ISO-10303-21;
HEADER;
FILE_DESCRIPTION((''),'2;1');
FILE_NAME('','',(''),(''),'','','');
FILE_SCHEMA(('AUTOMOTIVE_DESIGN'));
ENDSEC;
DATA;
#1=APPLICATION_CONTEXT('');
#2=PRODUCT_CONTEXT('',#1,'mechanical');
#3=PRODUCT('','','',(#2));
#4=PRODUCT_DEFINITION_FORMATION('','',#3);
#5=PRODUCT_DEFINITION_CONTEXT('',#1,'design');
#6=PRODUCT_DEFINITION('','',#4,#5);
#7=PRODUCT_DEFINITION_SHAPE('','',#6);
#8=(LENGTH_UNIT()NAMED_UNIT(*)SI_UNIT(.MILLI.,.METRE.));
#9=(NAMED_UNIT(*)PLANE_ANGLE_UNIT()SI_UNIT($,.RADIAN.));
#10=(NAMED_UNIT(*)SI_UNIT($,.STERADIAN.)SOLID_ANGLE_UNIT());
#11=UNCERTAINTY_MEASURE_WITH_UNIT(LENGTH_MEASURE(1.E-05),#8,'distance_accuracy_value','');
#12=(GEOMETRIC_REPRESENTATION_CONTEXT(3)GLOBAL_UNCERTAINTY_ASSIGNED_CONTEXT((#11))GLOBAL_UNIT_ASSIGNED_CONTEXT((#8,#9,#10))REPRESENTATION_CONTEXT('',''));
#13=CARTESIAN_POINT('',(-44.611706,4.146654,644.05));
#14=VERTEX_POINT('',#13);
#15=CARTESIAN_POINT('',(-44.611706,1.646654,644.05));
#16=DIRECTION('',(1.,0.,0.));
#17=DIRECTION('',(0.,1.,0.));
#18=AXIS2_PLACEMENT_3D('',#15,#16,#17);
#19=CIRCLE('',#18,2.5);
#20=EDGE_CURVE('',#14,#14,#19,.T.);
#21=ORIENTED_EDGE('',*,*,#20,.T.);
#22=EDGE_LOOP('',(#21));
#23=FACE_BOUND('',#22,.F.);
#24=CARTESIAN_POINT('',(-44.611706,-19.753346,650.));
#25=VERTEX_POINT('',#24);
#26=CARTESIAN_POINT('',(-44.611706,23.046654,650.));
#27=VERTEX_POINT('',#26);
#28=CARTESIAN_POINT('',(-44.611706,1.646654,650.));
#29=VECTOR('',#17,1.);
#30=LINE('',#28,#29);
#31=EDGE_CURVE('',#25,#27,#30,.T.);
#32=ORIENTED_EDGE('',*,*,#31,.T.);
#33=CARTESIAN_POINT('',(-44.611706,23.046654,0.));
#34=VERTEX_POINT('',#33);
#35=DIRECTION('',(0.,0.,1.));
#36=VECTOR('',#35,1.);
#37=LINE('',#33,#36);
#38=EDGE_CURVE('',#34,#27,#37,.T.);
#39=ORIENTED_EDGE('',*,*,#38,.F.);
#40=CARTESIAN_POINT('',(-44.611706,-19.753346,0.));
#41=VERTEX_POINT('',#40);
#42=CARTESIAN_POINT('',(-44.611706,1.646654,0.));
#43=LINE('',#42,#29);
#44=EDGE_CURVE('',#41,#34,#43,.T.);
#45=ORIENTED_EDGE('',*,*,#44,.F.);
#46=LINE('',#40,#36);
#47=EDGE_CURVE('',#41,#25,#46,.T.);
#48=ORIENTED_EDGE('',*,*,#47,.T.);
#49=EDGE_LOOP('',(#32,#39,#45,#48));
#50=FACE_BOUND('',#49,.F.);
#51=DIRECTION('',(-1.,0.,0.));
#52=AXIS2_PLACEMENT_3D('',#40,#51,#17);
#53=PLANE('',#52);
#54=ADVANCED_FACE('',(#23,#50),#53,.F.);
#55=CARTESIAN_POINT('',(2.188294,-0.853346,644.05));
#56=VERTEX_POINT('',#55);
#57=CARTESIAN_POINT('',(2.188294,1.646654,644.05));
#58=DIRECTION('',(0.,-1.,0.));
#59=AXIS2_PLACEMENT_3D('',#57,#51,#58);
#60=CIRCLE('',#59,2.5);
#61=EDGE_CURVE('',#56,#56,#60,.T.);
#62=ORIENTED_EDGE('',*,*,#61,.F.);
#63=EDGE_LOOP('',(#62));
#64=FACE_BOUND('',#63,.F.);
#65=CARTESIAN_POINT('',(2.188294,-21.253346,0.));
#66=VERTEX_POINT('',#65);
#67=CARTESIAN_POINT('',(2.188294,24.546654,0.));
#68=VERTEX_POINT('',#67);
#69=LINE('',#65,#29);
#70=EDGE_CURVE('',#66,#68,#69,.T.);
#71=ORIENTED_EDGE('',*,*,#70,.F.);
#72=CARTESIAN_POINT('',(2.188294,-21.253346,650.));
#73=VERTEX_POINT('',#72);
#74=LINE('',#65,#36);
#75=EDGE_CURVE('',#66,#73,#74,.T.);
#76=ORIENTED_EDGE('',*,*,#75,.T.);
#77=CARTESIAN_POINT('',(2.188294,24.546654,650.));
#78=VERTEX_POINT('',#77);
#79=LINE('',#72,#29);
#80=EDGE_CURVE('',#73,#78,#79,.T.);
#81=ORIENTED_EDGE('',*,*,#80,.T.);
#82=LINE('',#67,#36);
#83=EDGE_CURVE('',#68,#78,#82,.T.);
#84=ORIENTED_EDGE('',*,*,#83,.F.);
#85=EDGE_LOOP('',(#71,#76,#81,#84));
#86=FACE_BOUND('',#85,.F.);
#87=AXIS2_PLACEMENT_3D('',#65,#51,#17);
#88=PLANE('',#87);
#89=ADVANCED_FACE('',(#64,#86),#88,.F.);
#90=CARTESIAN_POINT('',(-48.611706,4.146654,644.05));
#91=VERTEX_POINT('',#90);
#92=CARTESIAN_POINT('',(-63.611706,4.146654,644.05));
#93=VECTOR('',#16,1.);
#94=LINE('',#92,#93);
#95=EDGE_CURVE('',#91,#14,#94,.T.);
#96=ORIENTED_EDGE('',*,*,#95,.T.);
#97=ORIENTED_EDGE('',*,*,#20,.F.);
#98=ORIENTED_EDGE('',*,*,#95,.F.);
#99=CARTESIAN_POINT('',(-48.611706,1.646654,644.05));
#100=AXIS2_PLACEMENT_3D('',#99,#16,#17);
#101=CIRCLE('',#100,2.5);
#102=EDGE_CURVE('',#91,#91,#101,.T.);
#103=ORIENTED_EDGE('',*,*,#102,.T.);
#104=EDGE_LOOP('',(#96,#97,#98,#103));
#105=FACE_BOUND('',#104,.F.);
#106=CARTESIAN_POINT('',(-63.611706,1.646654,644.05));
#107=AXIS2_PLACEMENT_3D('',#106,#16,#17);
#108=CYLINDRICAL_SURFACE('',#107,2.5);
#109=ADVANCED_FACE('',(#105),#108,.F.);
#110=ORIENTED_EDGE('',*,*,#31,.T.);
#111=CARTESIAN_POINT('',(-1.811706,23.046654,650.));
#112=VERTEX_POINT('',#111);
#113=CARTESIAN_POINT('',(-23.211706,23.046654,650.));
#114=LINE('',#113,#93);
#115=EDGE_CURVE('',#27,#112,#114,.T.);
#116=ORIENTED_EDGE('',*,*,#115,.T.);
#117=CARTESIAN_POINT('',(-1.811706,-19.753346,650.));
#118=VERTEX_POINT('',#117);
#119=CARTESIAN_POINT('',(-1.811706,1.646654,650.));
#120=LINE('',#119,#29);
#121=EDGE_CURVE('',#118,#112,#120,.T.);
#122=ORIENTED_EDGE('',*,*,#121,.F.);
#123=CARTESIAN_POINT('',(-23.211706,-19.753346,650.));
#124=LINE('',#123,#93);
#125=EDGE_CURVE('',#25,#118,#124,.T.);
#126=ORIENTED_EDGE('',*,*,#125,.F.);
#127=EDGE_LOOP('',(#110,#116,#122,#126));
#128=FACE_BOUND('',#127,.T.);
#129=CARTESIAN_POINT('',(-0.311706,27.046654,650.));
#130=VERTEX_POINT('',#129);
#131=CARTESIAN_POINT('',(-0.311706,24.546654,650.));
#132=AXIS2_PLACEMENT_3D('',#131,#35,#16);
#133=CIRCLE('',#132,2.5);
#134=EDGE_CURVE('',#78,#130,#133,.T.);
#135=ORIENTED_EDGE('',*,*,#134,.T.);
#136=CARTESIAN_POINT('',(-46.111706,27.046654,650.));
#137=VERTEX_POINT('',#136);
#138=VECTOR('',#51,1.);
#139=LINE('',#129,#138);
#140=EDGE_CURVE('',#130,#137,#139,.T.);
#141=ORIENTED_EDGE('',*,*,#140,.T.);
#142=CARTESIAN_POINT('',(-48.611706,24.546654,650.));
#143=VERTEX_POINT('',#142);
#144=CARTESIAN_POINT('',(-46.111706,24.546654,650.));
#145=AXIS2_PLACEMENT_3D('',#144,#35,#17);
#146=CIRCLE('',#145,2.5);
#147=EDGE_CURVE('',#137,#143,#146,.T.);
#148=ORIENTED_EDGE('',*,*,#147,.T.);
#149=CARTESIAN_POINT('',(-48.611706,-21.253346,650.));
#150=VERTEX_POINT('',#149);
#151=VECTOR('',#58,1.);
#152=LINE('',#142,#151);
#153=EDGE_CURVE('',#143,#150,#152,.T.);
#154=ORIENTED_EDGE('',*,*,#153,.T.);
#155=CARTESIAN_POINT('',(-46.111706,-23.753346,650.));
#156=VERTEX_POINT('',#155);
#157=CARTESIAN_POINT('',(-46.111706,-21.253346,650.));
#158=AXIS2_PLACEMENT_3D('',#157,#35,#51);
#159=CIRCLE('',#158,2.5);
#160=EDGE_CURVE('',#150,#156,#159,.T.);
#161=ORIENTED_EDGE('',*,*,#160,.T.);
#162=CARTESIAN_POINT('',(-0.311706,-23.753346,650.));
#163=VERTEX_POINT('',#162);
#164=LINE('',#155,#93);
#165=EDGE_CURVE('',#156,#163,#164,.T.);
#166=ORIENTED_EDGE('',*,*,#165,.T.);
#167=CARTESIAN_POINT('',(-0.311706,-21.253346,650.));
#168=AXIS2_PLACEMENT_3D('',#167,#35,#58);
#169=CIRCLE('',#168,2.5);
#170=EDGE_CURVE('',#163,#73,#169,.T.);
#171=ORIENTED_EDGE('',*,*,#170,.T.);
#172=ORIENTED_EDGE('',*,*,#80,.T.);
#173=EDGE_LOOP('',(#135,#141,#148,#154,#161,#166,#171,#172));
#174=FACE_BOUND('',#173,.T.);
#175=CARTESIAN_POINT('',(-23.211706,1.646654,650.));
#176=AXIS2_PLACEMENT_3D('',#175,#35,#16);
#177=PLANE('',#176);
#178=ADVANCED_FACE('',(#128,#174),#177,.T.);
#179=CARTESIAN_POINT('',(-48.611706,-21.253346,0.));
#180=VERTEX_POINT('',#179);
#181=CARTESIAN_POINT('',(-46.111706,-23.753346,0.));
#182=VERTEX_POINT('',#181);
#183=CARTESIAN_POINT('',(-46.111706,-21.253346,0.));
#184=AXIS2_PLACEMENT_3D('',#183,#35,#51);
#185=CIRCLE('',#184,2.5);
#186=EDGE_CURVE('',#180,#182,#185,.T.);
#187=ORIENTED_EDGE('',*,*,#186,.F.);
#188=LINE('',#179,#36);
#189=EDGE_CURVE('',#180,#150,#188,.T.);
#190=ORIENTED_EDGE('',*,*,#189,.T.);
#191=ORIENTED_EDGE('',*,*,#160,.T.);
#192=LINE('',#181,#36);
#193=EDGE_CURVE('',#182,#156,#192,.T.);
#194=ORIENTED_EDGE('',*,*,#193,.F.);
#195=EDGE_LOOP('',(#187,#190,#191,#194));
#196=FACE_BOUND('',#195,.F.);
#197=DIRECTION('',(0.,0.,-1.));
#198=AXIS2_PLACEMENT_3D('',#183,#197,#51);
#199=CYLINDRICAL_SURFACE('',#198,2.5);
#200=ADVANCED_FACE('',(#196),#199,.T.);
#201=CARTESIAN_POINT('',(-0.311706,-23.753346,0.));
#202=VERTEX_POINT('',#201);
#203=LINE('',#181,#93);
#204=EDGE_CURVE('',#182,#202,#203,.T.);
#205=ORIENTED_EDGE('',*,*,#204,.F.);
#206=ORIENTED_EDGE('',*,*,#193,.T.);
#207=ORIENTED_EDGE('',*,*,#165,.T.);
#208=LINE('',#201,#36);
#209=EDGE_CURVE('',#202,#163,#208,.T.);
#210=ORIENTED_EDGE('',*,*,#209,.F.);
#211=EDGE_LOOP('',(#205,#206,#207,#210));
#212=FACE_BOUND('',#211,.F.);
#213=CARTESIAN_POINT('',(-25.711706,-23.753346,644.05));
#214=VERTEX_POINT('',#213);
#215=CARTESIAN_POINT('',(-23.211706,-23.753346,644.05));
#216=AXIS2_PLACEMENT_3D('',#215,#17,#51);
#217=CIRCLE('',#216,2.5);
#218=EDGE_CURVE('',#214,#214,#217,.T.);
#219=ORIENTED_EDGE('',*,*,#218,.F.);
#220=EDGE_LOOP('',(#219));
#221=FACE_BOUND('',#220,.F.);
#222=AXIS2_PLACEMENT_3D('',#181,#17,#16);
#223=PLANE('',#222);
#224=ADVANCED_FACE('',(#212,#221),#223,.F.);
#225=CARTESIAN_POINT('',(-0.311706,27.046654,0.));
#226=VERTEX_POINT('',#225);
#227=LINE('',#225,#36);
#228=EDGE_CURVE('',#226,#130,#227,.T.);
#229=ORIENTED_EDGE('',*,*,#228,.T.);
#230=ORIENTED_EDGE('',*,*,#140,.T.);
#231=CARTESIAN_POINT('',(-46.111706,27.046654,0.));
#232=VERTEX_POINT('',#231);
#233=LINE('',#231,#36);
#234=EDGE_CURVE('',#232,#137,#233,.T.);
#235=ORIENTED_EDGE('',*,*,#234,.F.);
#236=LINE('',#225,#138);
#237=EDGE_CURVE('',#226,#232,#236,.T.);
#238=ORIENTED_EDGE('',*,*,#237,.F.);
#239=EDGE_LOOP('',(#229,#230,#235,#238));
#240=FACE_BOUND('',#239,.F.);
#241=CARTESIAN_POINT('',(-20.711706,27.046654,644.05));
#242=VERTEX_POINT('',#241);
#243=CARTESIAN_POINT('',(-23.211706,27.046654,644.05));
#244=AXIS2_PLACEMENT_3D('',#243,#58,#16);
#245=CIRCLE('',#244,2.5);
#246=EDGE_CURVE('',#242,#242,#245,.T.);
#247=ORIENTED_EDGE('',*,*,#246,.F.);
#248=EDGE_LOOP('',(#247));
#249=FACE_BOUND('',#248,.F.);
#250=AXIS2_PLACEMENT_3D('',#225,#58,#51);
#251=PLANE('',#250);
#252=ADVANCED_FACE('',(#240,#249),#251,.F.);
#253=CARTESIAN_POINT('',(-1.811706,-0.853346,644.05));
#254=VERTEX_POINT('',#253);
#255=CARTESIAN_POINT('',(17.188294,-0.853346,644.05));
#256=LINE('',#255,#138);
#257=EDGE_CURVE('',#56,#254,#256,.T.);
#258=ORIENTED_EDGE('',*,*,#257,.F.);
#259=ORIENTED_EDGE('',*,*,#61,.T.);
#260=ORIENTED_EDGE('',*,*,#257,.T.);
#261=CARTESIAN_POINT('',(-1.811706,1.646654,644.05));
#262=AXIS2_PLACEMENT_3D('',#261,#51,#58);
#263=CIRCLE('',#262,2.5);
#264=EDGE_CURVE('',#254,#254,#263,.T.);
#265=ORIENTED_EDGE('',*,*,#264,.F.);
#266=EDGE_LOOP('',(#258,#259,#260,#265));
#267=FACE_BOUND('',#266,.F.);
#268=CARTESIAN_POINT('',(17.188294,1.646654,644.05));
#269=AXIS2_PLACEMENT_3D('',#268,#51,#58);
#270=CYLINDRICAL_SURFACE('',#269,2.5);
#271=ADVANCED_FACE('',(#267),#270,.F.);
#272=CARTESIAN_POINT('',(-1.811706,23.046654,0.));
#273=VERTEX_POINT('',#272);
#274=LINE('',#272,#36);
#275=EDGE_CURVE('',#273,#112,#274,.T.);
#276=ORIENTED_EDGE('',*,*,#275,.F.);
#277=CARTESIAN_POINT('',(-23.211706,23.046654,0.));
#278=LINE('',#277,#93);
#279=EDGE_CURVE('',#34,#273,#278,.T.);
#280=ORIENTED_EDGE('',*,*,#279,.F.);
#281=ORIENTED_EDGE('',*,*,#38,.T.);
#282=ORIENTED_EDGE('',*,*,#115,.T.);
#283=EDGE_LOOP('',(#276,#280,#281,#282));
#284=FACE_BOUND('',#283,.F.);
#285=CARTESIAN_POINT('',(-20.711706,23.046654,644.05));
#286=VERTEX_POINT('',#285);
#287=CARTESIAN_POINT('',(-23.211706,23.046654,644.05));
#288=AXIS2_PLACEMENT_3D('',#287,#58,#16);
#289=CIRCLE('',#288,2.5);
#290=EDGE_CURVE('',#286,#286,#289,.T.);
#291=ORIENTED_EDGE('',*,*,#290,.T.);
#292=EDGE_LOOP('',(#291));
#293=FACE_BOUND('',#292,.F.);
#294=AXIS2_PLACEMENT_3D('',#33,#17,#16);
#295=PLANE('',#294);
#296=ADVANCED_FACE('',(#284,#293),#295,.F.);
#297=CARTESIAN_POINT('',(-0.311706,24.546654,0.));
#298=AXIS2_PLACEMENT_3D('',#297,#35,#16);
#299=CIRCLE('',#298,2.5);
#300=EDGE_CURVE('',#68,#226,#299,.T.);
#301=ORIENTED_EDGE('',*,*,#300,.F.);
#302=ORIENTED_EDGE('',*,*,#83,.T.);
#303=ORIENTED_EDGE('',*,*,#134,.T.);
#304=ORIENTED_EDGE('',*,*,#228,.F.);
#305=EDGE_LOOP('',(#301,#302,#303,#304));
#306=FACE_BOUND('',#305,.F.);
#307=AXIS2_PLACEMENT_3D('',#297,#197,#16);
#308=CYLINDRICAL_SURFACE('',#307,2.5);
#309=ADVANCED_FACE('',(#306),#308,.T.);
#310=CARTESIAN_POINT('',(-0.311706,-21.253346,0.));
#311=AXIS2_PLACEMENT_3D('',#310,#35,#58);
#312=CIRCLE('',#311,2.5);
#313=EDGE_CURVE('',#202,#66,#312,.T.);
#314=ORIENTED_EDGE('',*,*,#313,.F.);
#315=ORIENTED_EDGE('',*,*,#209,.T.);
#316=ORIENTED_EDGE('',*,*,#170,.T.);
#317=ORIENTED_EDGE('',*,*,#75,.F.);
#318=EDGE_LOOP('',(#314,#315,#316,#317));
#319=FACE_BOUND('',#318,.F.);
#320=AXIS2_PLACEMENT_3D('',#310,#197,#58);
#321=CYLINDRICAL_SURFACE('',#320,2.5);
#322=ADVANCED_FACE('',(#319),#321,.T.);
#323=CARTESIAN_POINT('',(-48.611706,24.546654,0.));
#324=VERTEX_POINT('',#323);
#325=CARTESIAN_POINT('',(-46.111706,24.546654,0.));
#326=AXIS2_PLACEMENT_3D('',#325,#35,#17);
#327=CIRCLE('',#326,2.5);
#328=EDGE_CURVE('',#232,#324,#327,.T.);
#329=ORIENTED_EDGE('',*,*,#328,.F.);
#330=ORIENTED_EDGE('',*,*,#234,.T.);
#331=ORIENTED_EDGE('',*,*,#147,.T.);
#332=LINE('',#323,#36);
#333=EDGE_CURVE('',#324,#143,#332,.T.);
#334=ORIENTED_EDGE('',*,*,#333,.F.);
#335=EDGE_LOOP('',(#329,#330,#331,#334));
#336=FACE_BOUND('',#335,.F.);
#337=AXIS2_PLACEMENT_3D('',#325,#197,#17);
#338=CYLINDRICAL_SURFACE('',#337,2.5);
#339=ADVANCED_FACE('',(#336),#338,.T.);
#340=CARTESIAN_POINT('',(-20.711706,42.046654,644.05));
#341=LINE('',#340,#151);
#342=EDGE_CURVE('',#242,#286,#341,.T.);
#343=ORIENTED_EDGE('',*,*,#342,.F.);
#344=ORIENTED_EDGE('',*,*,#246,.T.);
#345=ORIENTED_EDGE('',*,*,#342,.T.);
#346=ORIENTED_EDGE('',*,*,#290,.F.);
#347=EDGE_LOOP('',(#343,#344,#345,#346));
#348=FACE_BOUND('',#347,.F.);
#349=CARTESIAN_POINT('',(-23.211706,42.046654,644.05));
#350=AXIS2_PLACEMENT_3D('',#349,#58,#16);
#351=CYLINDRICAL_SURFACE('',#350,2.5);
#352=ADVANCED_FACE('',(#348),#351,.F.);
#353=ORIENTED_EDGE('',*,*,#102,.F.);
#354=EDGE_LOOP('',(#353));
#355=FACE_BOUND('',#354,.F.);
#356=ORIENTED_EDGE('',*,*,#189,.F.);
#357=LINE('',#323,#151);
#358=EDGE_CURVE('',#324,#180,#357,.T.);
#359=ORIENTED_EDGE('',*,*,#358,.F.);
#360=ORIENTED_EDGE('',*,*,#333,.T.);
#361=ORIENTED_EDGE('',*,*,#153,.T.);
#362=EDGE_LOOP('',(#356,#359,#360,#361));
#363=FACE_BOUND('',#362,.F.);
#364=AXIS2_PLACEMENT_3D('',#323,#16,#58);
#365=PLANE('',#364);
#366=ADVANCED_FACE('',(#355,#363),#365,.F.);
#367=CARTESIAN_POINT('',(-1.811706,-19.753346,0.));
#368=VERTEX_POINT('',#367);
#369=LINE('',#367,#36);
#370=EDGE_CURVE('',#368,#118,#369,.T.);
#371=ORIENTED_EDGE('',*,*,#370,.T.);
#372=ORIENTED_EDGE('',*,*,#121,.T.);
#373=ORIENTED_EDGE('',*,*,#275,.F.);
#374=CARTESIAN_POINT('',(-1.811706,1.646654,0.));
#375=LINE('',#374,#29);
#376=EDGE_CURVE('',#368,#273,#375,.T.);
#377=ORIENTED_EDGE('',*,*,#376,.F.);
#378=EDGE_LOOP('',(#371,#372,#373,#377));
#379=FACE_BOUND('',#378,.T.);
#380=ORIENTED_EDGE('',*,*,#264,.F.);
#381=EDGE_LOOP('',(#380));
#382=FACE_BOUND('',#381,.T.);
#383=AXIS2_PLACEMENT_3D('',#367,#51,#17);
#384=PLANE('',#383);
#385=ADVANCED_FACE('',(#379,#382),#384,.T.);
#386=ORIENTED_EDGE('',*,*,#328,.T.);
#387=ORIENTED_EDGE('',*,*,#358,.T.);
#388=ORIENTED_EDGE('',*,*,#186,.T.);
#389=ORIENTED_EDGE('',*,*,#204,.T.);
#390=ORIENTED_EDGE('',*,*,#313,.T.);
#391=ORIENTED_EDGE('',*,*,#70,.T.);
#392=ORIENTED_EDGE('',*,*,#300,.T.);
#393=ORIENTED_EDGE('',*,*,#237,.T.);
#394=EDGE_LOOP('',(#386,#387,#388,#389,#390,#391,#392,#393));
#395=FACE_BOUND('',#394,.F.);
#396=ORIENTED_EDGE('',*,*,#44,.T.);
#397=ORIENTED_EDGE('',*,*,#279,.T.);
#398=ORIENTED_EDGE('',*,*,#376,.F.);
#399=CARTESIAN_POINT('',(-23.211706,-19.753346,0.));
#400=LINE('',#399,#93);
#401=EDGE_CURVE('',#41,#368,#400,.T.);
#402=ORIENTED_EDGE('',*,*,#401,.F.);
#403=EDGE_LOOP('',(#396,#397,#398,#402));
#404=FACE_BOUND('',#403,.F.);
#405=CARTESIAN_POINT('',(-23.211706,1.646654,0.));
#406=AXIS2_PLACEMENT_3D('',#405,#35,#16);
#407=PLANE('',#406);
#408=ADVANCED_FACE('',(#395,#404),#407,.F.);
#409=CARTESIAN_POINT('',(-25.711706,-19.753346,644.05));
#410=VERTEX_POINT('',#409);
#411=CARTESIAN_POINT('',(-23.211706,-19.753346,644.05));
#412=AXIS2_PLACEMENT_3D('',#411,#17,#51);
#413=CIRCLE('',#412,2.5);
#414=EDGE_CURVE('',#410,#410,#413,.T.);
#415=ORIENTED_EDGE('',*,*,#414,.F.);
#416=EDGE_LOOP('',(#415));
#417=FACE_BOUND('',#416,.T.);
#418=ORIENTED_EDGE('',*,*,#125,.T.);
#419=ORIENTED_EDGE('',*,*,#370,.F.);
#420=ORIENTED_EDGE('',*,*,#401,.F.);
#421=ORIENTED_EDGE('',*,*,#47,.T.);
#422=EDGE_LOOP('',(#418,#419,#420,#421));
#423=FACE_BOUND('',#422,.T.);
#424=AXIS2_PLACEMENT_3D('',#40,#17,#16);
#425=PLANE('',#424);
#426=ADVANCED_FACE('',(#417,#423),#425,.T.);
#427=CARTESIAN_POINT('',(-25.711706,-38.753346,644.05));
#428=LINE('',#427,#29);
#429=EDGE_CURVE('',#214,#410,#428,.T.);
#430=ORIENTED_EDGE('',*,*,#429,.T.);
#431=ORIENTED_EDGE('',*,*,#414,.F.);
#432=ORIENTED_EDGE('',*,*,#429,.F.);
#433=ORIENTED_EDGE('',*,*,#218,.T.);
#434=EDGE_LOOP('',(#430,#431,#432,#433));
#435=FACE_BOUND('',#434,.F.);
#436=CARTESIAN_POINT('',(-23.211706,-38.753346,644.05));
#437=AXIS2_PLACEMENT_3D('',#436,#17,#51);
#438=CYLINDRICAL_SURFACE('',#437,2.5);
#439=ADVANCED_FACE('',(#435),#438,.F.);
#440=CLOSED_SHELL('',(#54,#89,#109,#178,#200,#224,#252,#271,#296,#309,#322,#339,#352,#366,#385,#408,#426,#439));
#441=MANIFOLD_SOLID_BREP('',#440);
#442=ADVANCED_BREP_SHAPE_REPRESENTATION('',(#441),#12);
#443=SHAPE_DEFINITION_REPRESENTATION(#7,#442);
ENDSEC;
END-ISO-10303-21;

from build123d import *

# Parameters (mm, degrees)
F0_W            = 42.8
F0_H            = 42.8
F1_DEPTH        = 650
F3_D            = 5
F3_DEPTH        = 15
F3_TIP          = 1.5021515476
F3_COPIES_COUNT = 4


# Not quite as in the source:
# - a pattern or mirror of a feature is missing from the dataset's text; its kind, count and spacing are read off the source's solid


with BuildPart() as f1:
    # F0 (on Top) → F1 (new body)
    with BuildSketch(Plane.XY):
        with BuildLine():
            Line((-0.3117055804, 27.0466537178), (-46.1117055804, 27.0466537178))
            ThreePointArc((-46.1117055804, 27.0466537178), (-47.8794725333, 26.3144206707), (-48.6117055804, 24.5466537178))
            Line((-48.6117055804, 24.5466537178), (-48.6117055804, -21.2533462822))
            ThreePointArc((-48.6117055804, -21.2533462822), (-47.8794725333, -23.0211132352), (-46.1117055804, -23.7533462822))
            Line((-46.1117055804, -23.7533462822), (-0.3117055804, -23.7533462822))
            ThreePointArc((-0.3117055804, -23.7533462822), (1.4560613726, -23.0211132352), (2.1882944196, -21.2533462822))
            Line((2.1882944196, -21.2533462822), (2.1882944196, 24.5466537178))
            ThreePointArc((2.1882944196, 24.5466537178), (1.4560613726, 26.3144206707), (-0.3117055804, 27.0466537178))
        make_face()
        with Locations((-23.2117055804, 1.6466537178)):
            Rectangle(F0_W, F0_H, mode=Mode.SUBTRACT)
    extrude(amount=F1_DEPTH)

    # F3
    with Locations(Plane.XZ.offset(23.7533462822)):
        with Locations((-23.2117055804, 644.05)):
            f3 = Hole(F3_D / 2, depth=F3_DEPTH)
            with Locations((0, 0, -(F3_DEPTH + F3_TIP / 2))):  # 118° drill point
                Cone(0, F3_D / 2, F3_TIP, mode=Mode.SUBTRACT)

    # F3_copies: F3 ×4 about axis
    f3_copies_axis = Axis((-23.211706, 1.646654, 0), (0, 0, 1))
    for i in range(1, F3_COPIES_COUNT):
        add(f3.rotate(f3_copies_axis, i * 360 / F3_COPIES_COUNT), mode=Mode.SUBTRACT)


solid = f1.part
